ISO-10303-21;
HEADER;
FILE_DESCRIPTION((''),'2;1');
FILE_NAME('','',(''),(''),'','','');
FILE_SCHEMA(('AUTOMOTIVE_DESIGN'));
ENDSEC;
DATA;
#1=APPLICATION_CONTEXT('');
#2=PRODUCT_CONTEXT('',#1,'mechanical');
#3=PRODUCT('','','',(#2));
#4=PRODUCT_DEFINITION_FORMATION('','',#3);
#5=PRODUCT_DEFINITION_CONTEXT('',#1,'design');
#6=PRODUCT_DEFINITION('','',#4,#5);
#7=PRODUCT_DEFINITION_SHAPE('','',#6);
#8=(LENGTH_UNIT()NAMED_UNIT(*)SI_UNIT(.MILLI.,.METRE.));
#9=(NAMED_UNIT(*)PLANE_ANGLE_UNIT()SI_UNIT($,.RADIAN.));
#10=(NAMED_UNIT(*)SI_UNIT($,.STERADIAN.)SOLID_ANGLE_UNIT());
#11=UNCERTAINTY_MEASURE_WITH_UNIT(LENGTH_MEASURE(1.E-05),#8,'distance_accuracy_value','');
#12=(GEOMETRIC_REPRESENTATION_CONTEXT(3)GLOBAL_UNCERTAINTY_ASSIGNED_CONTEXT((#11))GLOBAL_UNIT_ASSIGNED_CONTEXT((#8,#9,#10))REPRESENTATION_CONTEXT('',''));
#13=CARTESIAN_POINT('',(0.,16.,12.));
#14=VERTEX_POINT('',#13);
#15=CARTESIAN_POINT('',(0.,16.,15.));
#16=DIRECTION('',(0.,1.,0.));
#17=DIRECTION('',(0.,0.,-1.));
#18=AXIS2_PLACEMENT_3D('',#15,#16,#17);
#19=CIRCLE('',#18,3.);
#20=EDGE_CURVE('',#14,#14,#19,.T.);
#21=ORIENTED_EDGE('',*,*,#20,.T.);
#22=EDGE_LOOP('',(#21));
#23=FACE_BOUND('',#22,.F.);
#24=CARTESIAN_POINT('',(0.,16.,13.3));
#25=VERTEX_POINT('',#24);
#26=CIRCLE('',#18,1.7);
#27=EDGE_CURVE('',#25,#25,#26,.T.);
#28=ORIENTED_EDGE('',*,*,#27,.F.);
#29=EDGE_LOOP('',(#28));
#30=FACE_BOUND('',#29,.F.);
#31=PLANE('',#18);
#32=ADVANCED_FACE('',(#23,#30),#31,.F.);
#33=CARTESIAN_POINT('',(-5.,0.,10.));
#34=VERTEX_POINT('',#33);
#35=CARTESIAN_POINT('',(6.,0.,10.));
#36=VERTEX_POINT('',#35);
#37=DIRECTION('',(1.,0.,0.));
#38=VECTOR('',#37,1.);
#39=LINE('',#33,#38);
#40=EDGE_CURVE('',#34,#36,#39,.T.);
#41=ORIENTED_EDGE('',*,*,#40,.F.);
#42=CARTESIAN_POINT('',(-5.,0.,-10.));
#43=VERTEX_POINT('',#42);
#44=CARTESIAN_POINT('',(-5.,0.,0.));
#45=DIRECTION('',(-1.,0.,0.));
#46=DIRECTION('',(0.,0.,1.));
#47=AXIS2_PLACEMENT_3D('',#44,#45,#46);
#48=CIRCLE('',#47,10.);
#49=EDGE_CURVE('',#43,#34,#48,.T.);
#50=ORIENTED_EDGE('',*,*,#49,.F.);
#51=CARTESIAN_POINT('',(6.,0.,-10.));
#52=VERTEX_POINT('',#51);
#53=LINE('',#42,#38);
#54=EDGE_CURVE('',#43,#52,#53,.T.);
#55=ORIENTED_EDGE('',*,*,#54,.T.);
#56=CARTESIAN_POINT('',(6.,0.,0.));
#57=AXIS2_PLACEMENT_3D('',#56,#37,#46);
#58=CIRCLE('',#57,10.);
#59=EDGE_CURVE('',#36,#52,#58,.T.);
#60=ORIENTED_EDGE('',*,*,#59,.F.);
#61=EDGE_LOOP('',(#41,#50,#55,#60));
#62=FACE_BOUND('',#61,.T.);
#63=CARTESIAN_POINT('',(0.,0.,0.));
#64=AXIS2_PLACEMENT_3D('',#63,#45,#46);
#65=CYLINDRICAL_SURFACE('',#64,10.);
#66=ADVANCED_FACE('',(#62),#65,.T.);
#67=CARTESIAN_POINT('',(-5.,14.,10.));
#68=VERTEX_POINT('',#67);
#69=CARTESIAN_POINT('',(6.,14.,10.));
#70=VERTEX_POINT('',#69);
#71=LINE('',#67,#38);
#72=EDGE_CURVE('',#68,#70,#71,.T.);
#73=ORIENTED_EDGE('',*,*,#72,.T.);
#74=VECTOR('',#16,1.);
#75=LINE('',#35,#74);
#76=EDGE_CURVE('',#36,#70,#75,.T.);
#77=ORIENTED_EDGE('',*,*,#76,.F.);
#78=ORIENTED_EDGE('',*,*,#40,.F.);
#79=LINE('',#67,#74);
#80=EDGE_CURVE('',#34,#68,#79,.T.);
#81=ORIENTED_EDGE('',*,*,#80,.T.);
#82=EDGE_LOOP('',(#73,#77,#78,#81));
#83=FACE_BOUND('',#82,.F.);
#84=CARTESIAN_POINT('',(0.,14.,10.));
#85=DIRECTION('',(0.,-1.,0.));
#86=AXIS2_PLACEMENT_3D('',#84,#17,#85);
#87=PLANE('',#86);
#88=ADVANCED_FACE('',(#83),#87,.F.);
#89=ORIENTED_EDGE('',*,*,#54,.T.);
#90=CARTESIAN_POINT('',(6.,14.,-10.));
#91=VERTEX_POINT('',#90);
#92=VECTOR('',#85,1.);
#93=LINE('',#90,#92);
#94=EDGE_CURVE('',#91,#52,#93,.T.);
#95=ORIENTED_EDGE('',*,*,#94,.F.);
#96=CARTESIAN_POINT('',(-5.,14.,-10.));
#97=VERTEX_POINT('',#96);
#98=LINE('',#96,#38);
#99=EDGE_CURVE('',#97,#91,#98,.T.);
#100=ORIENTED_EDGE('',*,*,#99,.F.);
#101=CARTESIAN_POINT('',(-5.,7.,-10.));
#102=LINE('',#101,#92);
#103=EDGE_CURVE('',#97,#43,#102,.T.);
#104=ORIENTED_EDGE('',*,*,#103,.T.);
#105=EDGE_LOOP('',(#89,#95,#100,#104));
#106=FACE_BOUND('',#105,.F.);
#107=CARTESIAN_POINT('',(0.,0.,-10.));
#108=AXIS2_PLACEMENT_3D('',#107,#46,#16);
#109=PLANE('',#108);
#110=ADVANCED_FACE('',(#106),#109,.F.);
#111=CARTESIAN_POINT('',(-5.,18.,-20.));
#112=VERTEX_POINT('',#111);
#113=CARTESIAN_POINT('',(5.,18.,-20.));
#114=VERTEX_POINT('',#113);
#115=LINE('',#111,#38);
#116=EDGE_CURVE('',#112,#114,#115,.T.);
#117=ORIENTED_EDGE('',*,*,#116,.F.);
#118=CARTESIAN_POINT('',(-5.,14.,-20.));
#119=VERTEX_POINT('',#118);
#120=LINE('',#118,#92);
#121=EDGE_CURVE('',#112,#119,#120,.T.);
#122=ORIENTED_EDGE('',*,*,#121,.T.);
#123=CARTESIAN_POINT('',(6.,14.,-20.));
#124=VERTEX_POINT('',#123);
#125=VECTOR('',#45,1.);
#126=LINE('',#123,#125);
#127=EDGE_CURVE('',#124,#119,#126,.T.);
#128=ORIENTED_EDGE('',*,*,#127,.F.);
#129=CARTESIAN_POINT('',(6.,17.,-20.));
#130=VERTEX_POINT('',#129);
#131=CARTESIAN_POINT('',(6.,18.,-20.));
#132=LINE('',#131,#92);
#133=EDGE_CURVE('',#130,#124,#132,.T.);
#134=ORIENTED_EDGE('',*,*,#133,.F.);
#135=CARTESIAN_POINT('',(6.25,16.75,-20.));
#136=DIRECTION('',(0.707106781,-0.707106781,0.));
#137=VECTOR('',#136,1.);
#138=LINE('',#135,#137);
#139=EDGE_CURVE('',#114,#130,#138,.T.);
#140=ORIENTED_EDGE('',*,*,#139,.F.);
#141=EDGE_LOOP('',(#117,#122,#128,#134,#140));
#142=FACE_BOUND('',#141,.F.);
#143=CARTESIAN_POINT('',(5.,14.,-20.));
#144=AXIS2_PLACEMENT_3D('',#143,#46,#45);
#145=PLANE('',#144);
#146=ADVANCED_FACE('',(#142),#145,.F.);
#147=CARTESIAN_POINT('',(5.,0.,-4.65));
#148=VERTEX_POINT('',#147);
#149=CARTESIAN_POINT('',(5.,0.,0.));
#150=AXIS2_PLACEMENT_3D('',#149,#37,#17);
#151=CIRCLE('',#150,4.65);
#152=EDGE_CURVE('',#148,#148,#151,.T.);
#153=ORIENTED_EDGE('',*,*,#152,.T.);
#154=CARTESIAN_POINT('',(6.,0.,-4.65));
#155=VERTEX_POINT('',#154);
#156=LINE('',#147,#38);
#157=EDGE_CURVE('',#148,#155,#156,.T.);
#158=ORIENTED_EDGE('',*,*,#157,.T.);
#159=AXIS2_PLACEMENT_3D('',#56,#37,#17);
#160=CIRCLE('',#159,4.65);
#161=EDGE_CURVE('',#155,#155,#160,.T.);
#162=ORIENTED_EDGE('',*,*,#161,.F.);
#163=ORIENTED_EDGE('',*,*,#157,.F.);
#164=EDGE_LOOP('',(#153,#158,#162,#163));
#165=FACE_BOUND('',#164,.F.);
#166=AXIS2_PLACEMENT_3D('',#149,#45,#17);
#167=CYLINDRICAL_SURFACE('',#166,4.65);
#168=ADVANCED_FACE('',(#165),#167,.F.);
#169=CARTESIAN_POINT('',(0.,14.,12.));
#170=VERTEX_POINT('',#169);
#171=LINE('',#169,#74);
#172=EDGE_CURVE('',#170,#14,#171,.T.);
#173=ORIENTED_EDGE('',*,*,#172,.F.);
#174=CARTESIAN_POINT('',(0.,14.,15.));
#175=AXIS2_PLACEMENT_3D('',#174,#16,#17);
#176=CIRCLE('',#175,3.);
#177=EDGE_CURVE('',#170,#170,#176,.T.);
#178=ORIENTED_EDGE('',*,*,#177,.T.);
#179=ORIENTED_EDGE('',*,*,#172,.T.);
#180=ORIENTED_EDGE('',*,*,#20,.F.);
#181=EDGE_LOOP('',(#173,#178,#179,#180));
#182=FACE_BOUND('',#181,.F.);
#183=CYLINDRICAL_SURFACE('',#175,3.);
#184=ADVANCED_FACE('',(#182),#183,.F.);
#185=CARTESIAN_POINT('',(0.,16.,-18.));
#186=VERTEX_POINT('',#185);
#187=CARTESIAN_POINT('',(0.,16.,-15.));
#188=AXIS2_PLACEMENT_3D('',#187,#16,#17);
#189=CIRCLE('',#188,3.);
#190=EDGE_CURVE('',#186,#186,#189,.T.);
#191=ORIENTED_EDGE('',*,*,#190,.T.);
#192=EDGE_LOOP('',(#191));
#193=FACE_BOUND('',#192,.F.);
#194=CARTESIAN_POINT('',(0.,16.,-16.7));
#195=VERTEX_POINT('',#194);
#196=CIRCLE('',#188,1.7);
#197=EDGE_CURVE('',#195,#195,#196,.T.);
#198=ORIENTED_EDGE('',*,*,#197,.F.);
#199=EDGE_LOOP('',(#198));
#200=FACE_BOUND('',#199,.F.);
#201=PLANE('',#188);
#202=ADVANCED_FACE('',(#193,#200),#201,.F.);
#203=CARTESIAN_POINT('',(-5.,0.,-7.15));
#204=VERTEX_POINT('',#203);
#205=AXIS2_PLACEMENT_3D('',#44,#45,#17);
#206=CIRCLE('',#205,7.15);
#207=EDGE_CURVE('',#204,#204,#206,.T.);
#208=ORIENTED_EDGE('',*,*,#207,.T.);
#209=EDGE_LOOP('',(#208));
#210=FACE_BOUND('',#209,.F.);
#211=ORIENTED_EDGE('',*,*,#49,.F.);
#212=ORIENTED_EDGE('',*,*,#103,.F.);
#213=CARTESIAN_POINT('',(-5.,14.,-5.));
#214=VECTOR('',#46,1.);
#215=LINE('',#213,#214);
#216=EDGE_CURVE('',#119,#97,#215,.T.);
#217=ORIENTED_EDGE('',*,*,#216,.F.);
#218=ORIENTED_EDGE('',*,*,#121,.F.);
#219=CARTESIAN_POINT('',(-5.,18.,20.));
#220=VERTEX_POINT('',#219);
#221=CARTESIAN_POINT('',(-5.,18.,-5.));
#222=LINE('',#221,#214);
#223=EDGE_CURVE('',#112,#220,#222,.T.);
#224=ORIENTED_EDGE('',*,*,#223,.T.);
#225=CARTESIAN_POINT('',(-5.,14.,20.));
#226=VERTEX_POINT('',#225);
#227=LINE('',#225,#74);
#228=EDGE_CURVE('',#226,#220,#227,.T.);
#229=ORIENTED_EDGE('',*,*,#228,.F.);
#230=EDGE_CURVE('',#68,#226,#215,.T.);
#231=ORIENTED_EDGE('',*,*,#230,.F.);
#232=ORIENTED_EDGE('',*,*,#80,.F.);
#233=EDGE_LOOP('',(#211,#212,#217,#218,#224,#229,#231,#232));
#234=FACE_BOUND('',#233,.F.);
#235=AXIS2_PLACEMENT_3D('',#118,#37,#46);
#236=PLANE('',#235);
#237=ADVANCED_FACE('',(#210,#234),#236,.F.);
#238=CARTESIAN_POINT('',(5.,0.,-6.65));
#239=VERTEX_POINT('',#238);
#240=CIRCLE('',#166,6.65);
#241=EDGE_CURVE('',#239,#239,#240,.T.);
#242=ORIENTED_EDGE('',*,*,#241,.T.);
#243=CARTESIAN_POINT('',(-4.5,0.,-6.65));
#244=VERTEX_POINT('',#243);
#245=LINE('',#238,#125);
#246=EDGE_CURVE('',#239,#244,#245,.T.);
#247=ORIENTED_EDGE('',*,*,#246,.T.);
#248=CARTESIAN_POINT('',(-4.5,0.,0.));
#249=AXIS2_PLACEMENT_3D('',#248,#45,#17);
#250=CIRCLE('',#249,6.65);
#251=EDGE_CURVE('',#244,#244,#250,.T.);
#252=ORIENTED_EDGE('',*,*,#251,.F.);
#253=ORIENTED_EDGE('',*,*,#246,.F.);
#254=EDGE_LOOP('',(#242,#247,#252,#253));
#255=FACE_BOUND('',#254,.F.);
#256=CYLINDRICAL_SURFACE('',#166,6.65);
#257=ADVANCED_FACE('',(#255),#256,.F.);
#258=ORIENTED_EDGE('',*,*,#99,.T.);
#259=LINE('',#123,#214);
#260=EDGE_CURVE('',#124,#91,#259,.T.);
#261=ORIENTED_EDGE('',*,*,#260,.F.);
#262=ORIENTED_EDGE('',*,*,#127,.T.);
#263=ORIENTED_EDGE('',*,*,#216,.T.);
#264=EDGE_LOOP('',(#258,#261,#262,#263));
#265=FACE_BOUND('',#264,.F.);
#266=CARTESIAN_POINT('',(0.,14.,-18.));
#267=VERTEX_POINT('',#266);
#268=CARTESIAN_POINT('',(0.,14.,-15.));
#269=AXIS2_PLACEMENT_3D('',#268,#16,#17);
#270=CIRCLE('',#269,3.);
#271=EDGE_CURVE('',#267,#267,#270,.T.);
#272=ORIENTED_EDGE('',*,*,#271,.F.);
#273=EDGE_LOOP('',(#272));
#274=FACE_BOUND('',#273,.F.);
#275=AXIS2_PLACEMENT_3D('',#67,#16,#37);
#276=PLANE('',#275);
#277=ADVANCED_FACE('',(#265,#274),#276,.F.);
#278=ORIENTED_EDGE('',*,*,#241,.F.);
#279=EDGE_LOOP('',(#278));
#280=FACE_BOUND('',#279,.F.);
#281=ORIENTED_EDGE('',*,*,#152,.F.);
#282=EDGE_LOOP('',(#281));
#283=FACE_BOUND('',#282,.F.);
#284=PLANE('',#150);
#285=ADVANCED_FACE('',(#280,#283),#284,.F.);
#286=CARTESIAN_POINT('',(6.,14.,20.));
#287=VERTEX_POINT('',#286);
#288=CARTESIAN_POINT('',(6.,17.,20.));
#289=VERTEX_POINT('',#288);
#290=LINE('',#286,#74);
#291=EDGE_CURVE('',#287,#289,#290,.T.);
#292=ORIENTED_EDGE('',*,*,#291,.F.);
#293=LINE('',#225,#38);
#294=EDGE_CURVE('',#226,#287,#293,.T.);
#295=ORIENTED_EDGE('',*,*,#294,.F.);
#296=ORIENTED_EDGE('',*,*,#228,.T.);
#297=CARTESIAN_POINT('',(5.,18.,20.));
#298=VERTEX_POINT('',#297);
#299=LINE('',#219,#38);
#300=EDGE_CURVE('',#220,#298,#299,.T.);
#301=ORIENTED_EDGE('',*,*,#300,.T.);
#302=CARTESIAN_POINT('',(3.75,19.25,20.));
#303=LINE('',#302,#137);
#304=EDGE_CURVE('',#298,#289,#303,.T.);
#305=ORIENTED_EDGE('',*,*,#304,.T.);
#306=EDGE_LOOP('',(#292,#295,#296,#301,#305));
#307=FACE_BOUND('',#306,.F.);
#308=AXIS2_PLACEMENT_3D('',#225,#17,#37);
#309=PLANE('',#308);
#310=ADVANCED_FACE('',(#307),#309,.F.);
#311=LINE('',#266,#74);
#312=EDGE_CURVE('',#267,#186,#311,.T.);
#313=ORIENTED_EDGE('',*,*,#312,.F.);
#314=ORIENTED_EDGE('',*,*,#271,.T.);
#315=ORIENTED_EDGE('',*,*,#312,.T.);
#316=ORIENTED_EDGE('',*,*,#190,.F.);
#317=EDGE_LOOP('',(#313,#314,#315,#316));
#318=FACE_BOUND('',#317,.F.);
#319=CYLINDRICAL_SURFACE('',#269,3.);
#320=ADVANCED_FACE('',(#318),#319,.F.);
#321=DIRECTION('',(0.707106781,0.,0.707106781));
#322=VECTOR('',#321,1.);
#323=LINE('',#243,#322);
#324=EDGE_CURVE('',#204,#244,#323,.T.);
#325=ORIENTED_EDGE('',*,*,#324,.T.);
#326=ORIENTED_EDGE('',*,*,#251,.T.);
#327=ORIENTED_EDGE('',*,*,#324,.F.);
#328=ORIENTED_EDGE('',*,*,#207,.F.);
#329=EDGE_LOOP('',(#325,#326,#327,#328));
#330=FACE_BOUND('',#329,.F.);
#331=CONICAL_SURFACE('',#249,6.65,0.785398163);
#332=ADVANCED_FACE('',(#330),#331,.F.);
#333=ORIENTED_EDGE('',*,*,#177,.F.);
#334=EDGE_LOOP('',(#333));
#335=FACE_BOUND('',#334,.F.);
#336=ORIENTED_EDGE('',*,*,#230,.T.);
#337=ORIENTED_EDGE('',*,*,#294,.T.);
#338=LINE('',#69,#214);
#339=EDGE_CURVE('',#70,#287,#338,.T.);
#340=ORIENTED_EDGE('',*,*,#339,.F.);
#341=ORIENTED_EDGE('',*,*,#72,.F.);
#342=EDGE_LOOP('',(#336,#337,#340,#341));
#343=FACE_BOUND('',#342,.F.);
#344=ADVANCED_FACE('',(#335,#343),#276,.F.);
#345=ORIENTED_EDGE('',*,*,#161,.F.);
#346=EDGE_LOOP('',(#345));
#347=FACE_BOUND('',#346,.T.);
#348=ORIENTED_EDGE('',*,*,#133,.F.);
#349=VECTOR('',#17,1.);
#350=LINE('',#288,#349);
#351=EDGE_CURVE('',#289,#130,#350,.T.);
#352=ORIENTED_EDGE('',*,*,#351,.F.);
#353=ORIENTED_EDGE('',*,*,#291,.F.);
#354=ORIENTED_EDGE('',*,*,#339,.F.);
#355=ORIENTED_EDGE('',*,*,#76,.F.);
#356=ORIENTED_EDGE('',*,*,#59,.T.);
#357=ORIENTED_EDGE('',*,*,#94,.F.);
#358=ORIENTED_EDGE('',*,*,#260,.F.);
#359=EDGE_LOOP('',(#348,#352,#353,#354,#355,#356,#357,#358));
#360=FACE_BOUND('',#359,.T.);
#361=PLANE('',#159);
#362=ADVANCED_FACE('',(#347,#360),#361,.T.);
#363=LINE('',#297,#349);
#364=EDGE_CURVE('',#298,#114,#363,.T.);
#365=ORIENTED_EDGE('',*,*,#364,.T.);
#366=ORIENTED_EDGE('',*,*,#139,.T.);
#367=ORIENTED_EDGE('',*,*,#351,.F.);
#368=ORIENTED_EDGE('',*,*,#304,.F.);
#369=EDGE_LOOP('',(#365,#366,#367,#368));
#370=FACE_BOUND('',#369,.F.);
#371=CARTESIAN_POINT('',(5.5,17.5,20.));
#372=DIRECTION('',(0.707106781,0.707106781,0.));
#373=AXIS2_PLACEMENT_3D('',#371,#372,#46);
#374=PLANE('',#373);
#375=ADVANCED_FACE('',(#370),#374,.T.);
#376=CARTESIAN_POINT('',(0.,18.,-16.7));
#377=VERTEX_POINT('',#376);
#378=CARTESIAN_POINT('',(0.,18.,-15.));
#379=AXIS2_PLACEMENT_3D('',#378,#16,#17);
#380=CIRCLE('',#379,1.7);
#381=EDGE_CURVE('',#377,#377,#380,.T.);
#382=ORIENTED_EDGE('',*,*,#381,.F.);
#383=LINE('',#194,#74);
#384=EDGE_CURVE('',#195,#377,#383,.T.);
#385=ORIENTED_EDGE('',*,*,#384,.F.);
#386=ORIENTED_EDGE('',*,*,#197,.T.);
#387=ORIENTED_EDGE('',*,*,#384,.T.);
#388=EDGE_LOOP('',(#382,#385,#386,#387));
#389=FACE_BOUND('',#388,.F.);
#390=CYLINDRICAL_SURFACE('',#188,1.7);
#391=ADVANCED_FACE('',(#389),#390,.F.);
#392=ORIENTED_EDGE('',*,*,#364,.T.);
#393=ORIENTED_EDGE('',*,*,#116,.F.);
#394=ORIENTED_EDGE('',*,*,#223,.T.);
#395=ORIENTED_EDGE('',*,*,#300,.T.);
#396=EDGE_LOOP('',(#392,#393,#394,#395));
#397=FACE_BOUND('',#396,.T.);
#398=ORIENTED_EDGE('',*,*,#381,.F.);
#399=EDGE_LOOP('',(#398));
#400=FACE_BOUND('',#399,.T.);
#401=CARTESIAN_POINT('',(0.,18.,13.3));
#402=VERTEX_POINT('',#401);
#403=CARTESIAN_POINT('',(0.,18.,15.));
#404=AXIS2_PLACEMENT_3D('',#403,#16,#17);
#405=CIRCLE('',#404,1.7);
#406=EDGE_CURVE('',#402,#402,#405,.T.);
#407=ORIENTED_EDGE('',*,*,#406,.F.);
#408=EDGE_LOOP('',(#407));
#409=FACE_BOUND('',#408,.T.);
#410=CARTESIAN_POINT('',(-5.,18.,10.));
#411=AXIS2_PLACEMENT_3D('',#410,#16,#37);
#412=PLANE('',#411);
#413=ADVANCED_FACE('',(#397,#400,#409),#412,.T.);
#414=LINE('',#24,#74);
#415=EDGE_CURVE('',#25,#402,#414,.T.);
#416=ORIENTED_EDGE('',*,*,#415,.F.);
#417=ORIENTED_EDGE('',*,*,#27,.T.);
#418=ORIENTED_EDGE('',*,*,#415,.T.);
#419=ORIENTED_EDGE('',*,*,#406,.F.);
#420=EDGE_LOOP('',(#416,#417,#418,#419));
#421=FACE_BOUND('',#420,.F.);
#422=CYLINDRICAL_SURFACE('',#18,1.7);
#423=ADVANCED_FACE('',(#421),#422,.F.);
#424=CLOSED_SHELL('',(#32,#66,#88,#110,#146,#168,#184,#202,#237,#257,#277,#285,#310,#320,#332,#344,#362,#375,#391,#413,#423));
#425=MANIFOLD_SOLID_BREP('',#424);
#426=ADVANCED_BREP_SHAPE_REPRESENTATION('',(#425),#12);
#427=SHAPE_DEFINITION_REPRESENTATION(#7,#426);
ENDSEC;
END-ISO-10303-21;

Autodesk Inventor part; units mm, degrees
ref_plane "YZ Plane" through (0, 0, 0) normal (1, 0, 0) x (0, 1, 0)
ref_plane "XZ Plane" through (0, 0, 0) normal (0, 1, 0) x (-1, 0, 0)
ref_plane "XY Plane" through (0, 0, 0) normal (0, 0, 1) x (1, 0, 0)
sketch "Sketch1" plane through (0, 0, 0) normal (1, 0, 0) x (0, 1, 0)
  line L0 (0, 0) -> (14, 0) construction
  line L1 (0, -10) -> (14, -10)
  line L2 (14, 10) -> (0, 10)
  arc A0 (0, 10) -> (0, -10) centre (0, 0) ccw
  arc A1 (14, -10) -> (14, 10) centre (14, 0) ccw construction
  line L3 (14, 10) -> (14, -10)
  point P0 (7, 0)
  dimension "d2" = 20
  dimension "d1" = 14
extrude "Extrusion1" add sketch "Sketch1" along normal mid plane 10
sketch "Sketch2" plane through (-5, 14, 10) normal (0, 1, 0) x (1, 0, 0)
  line L0 (0, -10) -> (10, -10)
  line L1 (10, -10) -> (10, 30)
  line L2 (10, 30) -> (0, 30)
  line L3 (0, 30) -> (0, -10)
  line L4 (0, 0) -> (0, 20) construction
  line L5 (0, 20) -> (10, 20) construction
  line L6 (10, 20) -> (10, 0) construction
  line L7 (10, 0) -> (0, 0) construction
  line L8 (0, 0) -> (0, 20) construction
  line L9 (10, 20) -> (10, 0) construction
  line L10 (0, 10) -> (10, 10) construction
  point P0 (5, 10)
  dimension "d28" = 40
extrude "Extrusion2" add sketch "Sketch2" along normal blind 4
sketch "Sketch3" plane through (-5, 14, 10) normal (0, -1, 0) x (1, 0, 0)
  line L0 (10, -30) -> (0, -30) projected
  line L1 (0, -30) -> (0, -20) projected
  line L2 (0, -20) -> (0, 0) projected
  line L3 (0, 0) -> (0, 10) projected
  line L4 (0, 10) -> (10, 10) projected
  line L5 (10, 10) -> (10, 0) projected
  line L6 (10, 0) -> (10, -20) projected
  line L7 (10, -20) -> (10, -30) projected
  line L8 (10, -20) -> (0, -20) projected
  line L9 (0, 0) -> (10, 0) projected
  line L10 (0, 10) -> (10, 10) projected
  point P0 (5, -10)
  point P1 (5, 5)
  point P2 (5, -25)
  point P3 (5, 10)
  point P4 (5, 10)
  point P5 (5, 10)
  dimension "d30" = 5
  dimension "d31" = 5
hole "Hole1" at (0, 14, 15) at (0, 14, -15) direction (0, 1, 0) diameter 3.4 end through all counterbore diameter 6 counterbore depth 2
sketch "Sketch5" plane through (5, 0, 0) normal (1, 0, 0) x (0, 0, -1)
  arc A0 (-10, 0) -> (10, 0) centre (0, 0) ccw projected
hole "Hole3" at (5, 0, 0) direction (-1, 0, 0) diameter 13 end through all
thicken "Thicken1" operation add thickness 0.15 both sides no extend neighbours yes toward (0, 0.0804666, -0.9967573) faces at (1.6667, 0.523, -6.4789)
sketch "Sketch6" plane through (5, 0, 0) normal (1, 0, 0) x (0, 0, -1)
  circle A0 centre (0, 0) radius 6.65 construction
  line L0 (20, 18) -> (20, 14) projected
  line L1 (20, 14) -> (10, 14) projected
  line L2 (10, 14) -> (10, 0) projected
  arc A1 (-10, 0) -> (10, 0) centre (0, 0) ccw projected
  line L3 (-10, 0) -> (-10, 14) projected
  line L4 (-10, 14) -> (-20, 14) projected
  line L5 (-20, 14) -> (-20, 18) projected
  line L6 (-20, 18) -> (20, 18) projected
  circle A2 centre (0, 0) radius 6.65 projected
  line L7 (20, 18) -> (20, 14) projected
  line L8 (20, 14) -> (10, 14) projected
  line L9 (10, 14) -> (10, 0) projected
  arc A3 (-10, 0) -> (10, 0) centre (0, 0) ccw projected
  line L10 (-10, 0) -> (-10, 14) projected
  line L11 (-10, 14) -> (-20, 14) projected
  line L12 (-20, 14) -> (-20, 18) projected
  line L13 (-20, 18) -> (20, 18) projected
  circle A4 centre (0, 0) radius 4.65
  dimension "d37" = 2
extrude "Extrusion3" add sketch "Sketch6" along normal blind 1 contours L0 L1 L2 A1 L3 L4 L5 L6 | A2
chamfer "Chamfer2" distance 0.5 angle 45 1 edges at (-5, 0, 6.65)
chamfer "Chamfer3" distance 1 angle 45 1 edges at (6, 18, 0)
equation "\"d31\" = d30"
equation "\"d21\" = diameter"
equation "\"diameter\" = 13"
properties part number "bearing holder"
